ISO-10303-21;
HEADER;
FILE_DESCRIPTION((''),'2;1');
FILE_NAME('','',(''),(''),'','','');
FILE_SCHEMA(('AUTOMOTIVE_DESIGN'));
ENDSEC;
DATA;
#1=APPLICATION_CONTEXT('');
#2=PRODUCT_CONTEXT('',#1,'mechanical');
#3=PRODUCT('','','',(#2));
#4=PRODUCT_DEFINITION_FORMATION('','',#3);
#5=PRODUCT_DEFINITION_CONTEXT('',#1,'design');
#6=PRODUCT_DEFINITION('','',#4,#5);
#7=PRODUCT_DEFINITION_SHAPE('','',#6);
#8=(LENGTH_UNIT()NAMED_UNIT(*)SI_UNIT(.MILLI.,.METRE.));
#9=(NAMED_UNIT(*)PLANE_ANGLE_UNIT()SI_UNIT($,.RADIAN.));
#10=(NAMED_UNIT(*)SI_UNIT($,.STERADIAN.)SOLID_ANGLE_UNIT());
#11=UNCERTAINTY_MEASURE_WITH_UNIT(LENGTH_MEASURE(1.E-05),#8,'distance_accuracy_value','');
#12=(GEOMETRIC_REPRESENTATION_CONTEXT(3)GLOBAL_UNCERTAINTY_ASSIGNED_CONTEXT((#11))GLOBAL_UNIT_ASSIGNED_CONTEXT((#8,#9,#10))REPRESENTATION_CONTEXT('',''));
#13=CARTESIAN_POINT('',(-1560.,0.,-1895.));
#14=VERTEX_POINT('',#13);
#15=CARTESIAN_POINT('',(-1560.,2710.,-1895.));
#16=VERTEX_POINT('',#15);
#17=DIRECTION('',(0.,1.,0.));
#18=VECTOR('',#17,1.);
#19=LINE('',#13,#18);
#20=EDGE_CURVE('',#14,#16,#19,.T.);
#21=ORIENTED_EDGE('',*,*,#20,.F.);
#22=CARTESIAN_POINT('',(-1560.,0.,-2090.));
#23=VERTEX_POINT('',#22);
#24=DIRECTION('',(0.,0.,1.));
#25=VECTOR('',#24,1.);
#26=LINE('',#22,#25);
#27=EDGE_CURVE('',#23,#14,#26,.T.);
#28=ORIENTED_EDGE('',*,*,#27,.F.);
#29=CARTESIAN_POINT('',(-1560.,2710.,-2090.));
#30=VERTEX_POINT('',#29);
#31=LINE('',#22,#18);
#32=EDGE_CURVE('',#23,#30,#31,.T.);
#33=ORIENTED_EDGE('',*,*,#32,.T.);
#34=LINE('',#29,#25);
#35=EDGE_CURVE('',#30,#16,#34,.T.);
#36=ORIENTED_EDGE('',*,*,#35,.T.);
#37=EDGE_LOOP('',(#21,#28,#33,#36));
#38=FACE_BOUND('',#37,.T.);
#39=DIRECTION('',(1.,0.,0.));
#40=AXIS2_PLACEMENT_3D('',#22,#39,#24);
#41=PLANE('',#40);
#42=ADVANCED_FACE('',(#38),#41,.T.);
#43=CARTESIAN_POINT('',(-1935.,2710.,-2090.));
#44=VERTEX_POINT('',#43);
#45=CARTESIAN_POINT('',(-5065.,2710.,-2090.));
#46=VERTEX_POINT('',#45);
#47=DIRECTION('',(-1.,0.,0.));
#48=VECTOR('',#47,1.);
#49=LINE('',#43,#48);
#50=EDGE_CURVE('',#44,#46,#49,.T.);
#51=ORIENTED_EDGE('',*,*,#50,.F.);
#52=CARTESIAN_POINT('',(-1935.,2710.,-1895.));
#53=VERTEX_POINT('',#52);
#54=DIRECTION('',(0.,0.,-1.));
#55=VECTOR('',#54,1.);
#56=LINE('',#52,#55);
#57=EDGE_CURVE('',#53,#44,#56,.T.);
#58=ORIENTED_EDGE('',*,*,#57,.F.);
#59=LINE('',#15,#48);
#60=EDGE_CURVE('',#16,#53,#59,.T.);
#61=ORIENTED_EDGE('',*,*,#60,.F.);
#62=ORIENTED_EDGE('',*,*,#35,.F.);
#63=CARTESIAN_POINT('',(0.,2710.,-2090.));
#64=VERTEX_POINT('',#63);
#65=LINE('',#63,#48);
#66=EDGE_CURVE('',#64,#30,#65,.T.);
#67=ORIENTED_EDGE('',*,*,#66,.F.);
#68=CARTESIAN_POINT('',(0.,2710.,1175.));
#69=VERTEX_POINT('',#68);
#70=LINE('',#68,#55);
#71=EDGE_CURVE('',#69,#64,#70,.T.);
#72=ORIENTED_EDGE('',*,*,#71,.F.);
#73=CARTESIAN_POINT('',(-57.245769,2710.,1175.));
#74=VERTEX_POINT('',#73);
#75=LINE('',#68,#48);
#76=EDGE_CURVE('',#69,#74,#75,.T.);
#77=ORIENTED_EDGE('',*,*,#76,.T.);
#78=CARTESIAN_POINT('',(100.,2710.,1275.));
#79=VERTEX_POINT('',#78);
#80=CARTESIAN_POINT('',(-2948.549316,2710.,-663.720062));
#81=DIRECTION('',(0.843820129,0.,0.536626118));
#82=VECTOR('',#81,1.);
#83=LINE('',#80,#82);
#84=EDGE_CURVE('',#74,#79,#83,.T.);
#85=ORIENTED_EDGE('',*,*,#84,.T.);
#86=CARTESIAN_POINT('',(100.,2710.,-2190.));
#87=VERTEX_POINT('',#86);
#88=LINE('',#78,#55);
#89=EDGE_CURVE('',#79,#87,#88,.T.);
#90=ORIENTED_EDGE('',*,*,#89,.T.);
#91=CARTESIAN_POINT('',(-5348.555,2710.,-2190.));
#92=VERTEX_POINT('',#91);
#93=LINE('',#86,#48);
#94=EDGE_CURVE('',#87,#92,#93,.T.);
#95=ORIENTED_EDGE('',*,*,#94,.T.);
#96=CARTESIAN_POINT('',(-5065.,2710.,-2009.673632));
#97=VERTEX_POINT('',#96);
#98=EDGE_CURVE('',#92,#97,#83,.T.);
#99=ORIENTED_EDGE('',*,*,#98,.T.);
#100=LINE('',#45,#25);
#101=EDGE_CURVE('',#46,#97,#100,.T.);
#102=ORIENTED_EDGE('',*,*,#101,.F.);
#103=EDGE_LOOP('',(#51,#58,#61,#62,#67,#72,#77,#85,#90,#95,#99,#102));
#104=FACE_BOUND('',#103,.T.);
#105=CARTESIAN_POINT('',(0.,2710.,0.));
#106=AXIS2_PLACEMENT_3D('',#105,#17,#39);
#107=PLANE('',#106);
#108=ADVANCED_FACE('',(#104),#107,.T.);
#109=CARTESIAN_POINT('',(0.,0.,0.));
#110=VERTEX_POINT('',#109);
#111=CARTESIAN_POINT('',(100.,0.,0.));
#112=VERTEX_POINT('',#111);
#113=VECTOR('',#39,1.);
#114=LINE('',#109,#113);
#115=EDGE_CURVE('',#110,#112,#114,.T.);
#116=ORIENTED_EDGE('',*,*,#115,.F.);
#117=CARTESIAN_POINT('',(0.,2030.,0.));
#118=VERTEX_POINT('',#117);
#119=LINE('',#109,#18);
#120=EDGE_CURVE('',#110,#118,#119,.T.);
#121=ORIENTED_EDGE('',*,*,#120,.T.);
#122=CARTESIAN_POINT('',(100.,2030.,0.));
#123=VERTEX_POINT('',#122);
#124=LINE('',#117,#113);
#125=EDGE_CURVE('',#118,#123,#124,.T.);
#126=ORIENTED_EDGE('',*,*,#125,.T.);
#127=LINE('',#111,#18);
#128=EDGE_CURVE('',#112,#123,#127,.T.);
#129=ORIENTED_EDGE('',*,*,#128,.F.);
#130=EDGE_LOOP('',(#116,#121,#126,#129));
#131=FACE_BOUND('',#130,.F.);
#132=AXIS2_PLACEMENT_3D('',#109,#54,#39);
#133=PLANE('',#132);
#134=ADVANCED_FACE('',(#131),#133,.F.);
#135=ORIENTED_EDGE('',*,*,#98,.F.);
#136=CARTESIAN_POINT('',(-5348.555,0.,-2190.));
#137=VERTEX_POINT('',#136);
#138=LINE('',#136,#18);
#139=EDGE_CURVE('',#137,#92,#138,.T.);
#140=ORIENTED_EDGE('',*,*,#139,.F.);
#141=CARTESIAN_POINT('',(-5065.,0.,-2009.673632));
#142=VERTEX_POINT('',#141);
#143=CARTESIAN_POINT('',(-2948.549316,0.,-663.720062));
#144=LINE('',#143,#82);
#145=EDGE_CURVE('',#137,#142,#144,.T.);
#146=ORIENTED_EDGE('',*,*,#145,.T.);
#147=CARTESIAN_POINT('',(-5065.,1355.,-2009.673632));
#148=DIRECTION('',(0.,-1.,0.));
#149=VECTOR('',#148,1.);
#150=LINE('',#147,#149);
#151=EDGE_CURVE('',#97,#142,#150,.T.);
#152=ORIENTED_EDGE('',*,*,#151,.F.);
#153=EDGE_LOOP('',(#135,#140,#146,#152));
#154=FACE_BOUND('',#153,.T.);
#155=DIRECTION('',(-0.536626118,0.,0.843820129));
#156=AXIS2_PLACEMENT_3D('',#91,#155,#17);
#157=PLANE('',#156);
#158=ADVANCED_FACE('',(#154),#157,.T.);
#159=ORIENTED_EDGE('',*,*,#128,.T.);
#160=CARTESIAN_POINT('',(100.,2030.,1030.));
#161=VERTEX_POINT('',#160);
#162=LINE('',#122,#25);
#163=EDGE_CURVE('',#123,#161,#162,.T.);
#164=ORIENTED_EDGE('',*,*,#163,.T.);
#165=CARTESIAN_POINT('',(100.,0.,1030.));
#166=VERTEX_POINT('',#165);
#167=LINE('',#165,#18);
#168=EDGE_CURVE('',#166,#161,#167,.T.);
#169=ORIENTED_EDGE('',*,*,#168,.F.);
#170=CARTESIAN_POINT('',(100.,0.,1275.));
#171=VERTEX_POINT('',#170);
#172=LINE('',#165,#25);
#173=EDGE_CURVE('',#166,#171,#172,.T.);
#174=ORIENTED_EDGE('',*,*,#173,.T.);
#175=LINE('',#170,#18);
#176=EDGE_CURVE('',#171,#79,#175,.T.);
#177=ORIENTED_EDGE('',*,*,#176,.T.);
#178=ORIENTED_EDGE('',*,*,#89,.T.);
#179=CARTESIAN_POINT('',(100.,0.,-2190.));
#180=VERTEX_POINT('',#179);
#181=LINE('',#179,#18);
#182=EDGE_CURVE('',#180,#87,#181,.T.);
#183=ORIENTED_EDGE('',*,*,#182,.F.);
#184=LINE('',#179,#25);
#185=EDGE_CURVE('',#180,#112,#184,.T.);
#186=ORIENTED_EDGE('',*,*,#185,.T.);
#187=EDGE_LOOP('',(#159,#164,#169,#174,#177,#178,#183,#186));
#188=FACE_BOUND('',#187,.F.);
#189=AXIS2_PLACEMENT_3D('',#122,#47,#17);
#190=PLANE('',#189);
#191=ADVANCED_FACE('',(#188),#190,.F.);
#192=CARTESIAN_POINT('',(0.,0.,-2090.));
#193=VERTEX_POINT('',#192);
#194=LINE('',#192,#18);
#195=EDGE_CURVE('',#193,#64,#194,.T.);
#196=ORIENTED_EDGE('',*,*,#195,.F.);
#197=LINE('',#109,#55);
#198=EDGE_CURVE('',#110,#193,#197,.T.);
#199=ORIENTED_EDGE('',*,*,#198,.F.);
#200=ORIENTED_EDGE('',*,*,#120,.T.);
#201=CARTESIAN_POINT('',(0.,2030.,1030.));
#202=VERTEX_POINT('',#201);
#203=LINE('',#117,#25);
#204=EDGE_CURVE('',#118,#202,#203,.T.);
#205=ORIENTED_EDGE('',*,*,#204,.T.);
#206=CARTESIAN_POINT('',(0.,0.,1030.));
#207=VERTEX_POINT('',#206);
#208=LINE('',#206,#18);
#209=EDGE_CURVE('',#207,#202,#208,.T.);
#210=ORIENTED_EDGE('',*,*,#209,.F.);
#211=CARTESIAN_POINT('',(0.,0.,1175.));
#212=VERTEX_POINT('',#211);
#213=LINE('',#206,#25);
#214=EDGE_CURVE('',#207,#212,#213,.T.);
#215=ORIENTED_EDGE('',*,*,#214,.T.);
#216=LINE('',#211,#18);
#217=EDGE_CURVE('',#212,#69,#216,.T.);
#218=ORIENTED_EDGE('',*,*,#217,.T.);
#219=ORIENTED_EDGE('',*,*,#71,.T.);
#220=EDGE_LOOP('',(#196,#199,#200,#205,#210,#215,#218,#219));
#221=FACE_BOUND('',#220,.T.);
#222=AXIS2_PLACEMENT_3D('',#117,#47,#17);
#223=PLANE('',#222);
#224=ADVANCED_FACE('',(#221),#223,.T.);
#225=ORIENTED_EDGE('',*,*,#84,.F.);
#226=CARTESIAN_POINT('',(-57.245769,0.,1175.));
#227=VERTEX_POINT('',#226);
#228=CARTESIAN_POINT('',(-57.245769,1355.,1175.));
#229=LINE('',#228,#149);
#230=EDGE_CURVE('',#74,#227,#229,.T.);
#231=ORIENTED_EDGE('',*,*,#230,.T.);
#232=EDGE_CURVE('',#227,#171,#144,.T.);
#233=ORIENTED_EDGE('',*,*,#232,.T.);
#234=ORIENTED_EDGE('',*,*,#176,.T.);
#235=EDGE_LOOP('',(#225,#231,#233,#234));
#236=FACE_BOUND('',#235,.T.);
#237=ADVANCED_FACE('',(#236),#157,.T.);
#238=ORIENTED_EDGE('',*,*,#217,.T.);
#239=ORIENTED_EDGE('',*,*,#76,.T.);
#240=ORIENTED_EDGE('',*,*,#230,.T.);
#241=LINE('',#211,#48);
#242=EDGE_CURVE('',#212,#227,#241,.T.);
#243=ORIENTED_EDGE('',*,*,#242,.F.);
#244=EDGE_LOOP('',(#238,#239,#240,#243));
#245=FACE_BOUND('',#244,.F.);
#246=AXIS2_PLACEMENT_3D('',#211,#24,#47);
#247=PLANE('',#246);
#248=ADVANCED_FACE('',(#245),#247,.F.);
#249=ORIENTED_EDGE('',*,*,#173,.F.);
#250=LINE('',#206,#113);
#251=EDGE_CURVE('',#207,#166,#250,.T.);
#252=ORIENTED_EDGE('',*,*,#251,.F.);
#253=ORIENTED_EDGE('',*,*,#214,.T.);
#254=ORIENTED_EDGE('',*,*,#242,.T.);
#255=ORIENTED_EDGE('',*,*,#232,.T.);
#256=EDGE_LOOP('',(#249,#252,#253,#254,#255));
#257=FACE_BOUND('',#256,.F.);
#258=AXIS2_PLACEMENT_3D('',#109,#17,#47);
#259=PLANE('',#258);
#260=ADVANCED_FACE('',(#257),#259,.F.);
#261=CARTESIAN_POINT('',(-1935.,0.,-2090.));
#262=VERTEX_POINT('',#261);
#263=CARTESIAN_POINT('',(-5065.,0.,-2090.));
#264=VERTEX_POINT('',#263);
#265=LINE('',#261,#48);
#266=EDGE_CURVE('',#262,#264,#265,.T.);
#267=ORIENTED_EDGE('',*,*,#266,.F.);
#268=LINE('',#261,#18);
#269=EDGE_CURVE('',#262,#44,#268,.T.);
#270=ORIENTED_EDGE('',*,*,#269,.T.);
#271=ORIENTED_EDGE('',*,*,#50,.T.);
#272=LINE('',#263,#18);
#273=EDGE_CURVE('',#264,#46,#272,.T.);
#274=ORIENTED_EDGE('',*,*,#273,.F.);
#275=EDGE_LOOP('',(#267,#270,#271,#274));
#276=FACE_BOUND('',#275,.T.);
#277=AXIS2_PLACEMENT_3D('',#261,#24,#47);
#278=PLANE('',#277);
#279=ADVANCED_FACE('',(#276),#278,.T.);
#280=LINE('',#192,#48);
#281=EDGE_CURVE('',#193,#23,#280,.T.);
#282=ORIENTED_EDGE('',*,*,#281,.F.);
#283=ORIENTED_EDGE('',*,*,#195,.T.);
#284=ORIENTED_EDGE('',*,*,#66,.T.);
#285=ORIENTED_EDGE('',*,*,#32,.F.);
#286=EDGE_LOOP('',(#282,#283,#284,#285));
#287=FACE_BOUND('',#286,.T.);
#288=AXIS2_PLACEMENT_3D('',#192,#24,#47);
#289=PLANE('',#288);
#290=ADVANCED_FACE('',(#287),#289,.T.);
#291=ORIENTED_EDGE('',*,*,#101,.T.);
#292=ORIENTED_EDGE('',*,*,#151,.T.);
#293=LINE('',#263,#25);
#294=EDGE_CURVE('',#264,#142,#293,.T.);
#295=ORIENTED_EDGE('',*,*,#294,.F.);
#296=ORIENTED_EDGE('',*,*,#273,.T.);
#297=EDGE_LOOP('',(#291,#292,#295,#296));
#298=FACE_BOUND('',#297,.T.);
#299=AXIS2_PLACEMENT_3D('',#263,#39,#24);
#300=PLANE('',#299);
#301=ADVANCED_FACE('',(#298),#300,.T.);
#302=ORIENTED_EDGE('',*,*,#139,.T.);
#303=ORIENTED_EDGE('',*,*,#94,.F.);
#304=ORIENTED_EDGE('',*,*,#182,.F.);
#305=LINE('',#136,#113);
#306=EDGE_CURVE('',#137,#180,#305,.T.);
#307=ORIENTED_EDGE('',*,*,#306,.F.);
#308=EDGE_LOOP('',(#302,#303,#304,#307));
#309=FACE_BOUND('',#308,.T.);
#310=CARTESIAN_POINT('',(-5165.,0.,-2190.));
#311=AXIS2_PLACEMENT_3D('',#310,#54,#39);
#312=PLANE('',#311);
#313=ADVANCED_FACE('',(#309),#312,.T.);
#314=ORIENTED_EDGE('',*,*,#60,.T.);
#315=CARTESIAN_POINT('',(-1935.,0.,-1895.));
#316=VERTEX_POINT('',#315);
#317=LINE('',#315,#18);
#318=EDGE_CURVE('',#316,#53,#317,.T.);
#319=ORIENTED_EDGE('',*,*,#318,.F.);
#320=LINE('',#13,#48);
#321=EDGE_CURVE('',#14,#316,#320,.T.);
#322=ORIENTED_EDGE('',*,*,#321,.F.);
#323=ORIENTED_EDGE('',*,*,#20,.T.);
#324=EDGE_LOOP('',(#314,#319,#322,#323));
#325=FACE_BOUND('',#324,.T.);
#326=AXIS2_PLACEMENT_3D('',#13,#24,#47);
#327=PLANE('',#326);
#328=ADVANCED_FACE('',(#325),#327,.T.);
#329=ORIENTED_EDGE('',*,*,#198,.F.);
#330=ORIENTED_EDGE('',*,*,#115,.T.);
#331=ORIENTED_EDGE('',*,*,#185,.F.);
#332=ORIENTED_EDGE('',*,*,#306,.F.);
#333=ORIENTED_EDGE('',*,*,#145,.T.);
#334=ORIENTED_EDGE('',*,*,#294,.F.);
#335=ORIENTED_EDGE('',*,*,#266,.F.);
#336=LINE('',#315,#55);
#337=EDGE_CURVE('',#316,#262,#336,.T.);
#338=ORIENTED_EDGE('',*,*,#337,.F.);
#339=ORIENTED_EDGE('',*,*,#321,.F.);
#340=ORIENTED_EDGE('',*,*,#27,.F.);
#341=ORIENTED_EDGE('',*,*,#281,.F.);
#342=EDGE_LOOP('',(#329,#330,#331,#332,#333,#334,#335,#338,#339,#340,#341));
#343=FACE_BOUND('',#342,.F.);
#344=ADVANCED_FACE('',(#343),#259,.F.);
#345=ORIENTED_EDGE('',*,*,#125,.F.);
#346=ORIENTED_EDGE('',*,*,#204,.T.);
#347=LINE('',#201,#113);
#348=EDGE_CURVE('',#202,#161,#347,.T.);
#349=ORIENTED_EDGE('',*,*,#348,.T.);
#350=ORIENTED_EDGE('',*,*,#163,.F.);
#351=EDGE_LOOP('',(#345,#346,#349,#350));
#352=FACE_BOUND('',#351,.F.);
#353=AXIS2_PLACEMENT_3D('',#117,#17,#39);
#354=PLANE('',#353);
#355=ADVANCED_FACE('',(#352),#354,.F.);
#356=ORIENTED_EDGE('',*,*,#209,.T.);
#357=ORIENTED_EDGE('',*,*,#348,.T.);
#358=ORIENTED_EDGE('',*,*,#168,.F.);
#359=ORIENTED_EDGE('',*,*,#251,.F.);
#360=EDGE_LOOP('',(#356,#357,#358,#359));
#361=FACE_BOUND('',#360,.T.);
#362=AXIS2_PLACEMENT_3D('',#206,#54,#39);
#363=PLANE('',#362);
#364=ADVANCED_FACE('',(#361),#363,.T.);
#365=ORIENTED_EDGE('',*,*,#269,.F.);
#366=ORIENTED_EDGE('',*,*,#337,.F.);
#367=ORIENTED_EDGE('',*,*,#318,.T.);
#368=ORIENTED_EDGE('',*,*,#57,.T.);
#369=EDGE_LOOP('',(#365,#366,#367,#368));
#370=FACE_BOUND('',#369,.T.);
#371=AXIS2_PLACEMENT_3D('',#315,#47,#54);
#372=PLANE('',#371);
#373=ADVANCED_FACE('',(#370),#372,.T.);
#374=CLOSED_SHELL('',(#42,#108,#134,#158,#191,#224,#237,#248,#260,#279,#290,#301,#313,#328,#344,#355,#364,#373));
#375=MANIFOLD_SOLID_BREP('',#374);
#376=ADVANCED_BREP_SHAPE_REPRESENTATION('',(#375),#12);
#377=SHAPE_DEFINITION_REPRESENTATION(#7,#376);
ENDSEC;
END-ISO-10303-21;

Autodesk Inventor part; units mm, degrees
ref_plane "YZ Plane" through (0, 0, 0) normal (1, 0, 0) x (0, 1, 0)
ref_plane "XZ Plane" through (0, 0, 0) normal (0, 1, 0) x (-1, 0, 0)
ref_plane "XY Plane" through (0, 0, 0) normal (0, 0, 1) x (1, 0, 0)
sketch "Boceto1" plane through (0, 0, 0) normal (0, 1, 0) x (-1, 0, 0)
  line L0 (0, 0) -> (0, -2090)
  line L1 (0, -2090) -> (1560, -2090)
  line L2 (1560, -2090) -> (1560, -1895)
  line L3 (1560, -1895) -> (1935, -1895)
  line L4 (1935, -1895) -> (1935, -2090)
  line L5 (1935, -2090) -> (5065, -2090)
  line L6 (5065, -2090) -> (5065, -1915)
  line L7 (5065, -1915) -> (5250, -1915)
  line L8 (0, 0) -> (0, 310) construction
  line L9 (0, 310) -> (0, 1030) construction
  line L10 (0, 1030) -> (0, 1175)
  line L11 (0, 1175) -> (1645, 1175)
  line L12 (1645, 1175) -> (1645, 1535)
  line L13 (1645, 1535) -> (2010, 1535)
  line L14 (2010, 1535) -> (2010, 1825)
  line L15 (2010, 1825) -> (5120, 1825)
  line L16 (5120, 1825) -> (5120, 1520)
  line L17 (5120, 1520) -> (5300, 1520)
  line L18 (5300, 1520) -> (5250, -1915)
  line L19 (-100, -2190) -> (-100, 0)
  line L20 (-100, 0) -> (-100, 310)
  line L21 (-100, 310) -> (-100, 1030)
  line L22 (-100, 1030) -> (-100, 1275)
  line L23 (-100, 1275) -> (1545, 1275)
  line L24 (1545, 1275) -> (1545, 1635)
  line L25 (1545, 1635) -> (1910, 1635)
  line L26 (1910, 1635) -> (1910, 1925)
  line L27 (1910, 1925) -> (5220, 1925)
  line L28 (5220, 1925) -> (5220, 1620)
  line L29 (5220, 1620) -> (5401.4662, 1620)
  line L30 (5401.4662, 1620) -> (5348.555, -2015)
  line L31 (5348.555, -2015) -> (5165, -2015)
  line L32 (5165, -2015) -> (5165, -2190)
  line L33 (5165, -2190) -> (1835, -2190)
  line L34 (1835, -2190) -> (1835, -1995)
  line L35 (1835, -1995) -> (1660, -1995)
  line L36 (1660, -1995) -> (1660, -2190)
  line L37 (1660, -2190) -> (-100, -2190)
  line L38 (0, 1030) -> (-100, 1030)
  line L39 (0, 0) -> (-100, 0)
  line L40 (1835, -2190) -> (1660, -2190)
  line L41 (5348.555, -2015) -> (5348.555, -2190)
  line L42 (5348.555, -2190) -> (5165, -2190)
  line L43 (5220, 1925) -> (5401.4662, 1925)
  line L44 (5401.4662, 1925) -> (5401.4662, 1620)
  line L45 (1545, 1635) -> (1545, 1925)
  line L46 (1545, 1925) -> (1910, 1925)
  dimension "d0" = 2090
  dimension "d1" = 1560
  dimension "d2" = 195
  dimension "d3" = 375
  dimension "d4" = 195
  dimension "d5" = 3130
  dimension "d6" = 175
  dimension "d8" = 185
  dimension "d10" = 310
  dimension "d11" = 720
  dimension "d12" = 145
  dimension "d13" = 1645
  dimension "d14" = 360
  dimension "d15" = 365
  dimension "d16" = 290
  dimension "d17" = 3110
  dimension "d18" = 305
  dimension "d19" = 180
  dimension "d20" = 100
extrude "Extrusión1" add sketch "Boceto1" along normal blind 2710 contours L0 L1 L2 L3 L4 L5 L6 L7 L18 L17 L16 L15 L14 L13 L12 L11 L10 L38 L22 L23 L24 L25 L26 L27 L28 L29 L30 L31 L32 L33 L34 L35 L36 L37 L19 L39 | L36 L35 L34 L40 | L32 L31 L41 L42 | L45 L46 L26 L25 | L29 L28 L43 L44
sketch "Boceto2" plane through (0, 0, 0) normal (0, 0, 1) x (1, 0, 0)
  line L0 (0, 0) -> (0, 2030)
  line L1 (0, 0) -> (0, 2710) projected
  line L2 (0, 2030) -> (100, 2030)
  line L3 (100, 0) -> (100, 2710) projected
  line L4 (0, 0) -> (100, 0) projected
  line L5 (100, 0) -> (100, 2710) projected
  line L6 (0, 2710) -> (100, 2710) projected
  line L7 (0, 0) -> (0, 2710) projected
  dimension "d23" = 2030
extrude "Extrusión2" add sketch "Boceto2" along normal up to surface (1030 mm away) contours L1 L6 L3 L2
sketch "Boceto3" plane through (-5250, 0, -1915) normal (0.9998941, 0, 0.0145545) x (0.0145545, 0, -0.9998941)
  line L0 (-3435.3639, 0) -> (0, 0) projected
  line L1 (0, 0) -> (0, 2710) projected
  line L2 (-3435.3639, 2710) -> (0, 2710) projected
  line L3 (-3435.3639, 0) -> (-3435.3639, 2710) projected
  line L4 (-3435.3639, 0) -> (0, 0) projected
  line L5 (0, 0) -> (-280, 0)
  line L6 (-280, 0) -> (-280, 1120)
  line L7 (-280, 1120) -> (-2610, 1120)
  line L8 (-2610, 1120) -> (-2610, 2470)
  line L9 (-2610, 2470) -> (-280, 2470)
  line L10 (-280, 2470) -> (-280, 1120)
  point P0 (-1838.386, 0)
  dimension "d26" = 280
  dimension "d27" = 1120
  dimension "d28" = 2330
  dimension "d29" = 1350
extrude "Extrusión3" cut sketch "Boceto3" against normal up to surface (100 mm away) contours L7 L8 L9 L10
ref_plane "Plano division pared" through (-5348.555, 2710, -2190) normal (0.5366261, 0, -0.8438201) x (0.8438201, 0, 0.5366261)
split "Dividir1" plane through (-5348.555, 2710, -2190) removes the side toward (-0.5366261, 0, 0.8438201)
properties part number "Paredes"
